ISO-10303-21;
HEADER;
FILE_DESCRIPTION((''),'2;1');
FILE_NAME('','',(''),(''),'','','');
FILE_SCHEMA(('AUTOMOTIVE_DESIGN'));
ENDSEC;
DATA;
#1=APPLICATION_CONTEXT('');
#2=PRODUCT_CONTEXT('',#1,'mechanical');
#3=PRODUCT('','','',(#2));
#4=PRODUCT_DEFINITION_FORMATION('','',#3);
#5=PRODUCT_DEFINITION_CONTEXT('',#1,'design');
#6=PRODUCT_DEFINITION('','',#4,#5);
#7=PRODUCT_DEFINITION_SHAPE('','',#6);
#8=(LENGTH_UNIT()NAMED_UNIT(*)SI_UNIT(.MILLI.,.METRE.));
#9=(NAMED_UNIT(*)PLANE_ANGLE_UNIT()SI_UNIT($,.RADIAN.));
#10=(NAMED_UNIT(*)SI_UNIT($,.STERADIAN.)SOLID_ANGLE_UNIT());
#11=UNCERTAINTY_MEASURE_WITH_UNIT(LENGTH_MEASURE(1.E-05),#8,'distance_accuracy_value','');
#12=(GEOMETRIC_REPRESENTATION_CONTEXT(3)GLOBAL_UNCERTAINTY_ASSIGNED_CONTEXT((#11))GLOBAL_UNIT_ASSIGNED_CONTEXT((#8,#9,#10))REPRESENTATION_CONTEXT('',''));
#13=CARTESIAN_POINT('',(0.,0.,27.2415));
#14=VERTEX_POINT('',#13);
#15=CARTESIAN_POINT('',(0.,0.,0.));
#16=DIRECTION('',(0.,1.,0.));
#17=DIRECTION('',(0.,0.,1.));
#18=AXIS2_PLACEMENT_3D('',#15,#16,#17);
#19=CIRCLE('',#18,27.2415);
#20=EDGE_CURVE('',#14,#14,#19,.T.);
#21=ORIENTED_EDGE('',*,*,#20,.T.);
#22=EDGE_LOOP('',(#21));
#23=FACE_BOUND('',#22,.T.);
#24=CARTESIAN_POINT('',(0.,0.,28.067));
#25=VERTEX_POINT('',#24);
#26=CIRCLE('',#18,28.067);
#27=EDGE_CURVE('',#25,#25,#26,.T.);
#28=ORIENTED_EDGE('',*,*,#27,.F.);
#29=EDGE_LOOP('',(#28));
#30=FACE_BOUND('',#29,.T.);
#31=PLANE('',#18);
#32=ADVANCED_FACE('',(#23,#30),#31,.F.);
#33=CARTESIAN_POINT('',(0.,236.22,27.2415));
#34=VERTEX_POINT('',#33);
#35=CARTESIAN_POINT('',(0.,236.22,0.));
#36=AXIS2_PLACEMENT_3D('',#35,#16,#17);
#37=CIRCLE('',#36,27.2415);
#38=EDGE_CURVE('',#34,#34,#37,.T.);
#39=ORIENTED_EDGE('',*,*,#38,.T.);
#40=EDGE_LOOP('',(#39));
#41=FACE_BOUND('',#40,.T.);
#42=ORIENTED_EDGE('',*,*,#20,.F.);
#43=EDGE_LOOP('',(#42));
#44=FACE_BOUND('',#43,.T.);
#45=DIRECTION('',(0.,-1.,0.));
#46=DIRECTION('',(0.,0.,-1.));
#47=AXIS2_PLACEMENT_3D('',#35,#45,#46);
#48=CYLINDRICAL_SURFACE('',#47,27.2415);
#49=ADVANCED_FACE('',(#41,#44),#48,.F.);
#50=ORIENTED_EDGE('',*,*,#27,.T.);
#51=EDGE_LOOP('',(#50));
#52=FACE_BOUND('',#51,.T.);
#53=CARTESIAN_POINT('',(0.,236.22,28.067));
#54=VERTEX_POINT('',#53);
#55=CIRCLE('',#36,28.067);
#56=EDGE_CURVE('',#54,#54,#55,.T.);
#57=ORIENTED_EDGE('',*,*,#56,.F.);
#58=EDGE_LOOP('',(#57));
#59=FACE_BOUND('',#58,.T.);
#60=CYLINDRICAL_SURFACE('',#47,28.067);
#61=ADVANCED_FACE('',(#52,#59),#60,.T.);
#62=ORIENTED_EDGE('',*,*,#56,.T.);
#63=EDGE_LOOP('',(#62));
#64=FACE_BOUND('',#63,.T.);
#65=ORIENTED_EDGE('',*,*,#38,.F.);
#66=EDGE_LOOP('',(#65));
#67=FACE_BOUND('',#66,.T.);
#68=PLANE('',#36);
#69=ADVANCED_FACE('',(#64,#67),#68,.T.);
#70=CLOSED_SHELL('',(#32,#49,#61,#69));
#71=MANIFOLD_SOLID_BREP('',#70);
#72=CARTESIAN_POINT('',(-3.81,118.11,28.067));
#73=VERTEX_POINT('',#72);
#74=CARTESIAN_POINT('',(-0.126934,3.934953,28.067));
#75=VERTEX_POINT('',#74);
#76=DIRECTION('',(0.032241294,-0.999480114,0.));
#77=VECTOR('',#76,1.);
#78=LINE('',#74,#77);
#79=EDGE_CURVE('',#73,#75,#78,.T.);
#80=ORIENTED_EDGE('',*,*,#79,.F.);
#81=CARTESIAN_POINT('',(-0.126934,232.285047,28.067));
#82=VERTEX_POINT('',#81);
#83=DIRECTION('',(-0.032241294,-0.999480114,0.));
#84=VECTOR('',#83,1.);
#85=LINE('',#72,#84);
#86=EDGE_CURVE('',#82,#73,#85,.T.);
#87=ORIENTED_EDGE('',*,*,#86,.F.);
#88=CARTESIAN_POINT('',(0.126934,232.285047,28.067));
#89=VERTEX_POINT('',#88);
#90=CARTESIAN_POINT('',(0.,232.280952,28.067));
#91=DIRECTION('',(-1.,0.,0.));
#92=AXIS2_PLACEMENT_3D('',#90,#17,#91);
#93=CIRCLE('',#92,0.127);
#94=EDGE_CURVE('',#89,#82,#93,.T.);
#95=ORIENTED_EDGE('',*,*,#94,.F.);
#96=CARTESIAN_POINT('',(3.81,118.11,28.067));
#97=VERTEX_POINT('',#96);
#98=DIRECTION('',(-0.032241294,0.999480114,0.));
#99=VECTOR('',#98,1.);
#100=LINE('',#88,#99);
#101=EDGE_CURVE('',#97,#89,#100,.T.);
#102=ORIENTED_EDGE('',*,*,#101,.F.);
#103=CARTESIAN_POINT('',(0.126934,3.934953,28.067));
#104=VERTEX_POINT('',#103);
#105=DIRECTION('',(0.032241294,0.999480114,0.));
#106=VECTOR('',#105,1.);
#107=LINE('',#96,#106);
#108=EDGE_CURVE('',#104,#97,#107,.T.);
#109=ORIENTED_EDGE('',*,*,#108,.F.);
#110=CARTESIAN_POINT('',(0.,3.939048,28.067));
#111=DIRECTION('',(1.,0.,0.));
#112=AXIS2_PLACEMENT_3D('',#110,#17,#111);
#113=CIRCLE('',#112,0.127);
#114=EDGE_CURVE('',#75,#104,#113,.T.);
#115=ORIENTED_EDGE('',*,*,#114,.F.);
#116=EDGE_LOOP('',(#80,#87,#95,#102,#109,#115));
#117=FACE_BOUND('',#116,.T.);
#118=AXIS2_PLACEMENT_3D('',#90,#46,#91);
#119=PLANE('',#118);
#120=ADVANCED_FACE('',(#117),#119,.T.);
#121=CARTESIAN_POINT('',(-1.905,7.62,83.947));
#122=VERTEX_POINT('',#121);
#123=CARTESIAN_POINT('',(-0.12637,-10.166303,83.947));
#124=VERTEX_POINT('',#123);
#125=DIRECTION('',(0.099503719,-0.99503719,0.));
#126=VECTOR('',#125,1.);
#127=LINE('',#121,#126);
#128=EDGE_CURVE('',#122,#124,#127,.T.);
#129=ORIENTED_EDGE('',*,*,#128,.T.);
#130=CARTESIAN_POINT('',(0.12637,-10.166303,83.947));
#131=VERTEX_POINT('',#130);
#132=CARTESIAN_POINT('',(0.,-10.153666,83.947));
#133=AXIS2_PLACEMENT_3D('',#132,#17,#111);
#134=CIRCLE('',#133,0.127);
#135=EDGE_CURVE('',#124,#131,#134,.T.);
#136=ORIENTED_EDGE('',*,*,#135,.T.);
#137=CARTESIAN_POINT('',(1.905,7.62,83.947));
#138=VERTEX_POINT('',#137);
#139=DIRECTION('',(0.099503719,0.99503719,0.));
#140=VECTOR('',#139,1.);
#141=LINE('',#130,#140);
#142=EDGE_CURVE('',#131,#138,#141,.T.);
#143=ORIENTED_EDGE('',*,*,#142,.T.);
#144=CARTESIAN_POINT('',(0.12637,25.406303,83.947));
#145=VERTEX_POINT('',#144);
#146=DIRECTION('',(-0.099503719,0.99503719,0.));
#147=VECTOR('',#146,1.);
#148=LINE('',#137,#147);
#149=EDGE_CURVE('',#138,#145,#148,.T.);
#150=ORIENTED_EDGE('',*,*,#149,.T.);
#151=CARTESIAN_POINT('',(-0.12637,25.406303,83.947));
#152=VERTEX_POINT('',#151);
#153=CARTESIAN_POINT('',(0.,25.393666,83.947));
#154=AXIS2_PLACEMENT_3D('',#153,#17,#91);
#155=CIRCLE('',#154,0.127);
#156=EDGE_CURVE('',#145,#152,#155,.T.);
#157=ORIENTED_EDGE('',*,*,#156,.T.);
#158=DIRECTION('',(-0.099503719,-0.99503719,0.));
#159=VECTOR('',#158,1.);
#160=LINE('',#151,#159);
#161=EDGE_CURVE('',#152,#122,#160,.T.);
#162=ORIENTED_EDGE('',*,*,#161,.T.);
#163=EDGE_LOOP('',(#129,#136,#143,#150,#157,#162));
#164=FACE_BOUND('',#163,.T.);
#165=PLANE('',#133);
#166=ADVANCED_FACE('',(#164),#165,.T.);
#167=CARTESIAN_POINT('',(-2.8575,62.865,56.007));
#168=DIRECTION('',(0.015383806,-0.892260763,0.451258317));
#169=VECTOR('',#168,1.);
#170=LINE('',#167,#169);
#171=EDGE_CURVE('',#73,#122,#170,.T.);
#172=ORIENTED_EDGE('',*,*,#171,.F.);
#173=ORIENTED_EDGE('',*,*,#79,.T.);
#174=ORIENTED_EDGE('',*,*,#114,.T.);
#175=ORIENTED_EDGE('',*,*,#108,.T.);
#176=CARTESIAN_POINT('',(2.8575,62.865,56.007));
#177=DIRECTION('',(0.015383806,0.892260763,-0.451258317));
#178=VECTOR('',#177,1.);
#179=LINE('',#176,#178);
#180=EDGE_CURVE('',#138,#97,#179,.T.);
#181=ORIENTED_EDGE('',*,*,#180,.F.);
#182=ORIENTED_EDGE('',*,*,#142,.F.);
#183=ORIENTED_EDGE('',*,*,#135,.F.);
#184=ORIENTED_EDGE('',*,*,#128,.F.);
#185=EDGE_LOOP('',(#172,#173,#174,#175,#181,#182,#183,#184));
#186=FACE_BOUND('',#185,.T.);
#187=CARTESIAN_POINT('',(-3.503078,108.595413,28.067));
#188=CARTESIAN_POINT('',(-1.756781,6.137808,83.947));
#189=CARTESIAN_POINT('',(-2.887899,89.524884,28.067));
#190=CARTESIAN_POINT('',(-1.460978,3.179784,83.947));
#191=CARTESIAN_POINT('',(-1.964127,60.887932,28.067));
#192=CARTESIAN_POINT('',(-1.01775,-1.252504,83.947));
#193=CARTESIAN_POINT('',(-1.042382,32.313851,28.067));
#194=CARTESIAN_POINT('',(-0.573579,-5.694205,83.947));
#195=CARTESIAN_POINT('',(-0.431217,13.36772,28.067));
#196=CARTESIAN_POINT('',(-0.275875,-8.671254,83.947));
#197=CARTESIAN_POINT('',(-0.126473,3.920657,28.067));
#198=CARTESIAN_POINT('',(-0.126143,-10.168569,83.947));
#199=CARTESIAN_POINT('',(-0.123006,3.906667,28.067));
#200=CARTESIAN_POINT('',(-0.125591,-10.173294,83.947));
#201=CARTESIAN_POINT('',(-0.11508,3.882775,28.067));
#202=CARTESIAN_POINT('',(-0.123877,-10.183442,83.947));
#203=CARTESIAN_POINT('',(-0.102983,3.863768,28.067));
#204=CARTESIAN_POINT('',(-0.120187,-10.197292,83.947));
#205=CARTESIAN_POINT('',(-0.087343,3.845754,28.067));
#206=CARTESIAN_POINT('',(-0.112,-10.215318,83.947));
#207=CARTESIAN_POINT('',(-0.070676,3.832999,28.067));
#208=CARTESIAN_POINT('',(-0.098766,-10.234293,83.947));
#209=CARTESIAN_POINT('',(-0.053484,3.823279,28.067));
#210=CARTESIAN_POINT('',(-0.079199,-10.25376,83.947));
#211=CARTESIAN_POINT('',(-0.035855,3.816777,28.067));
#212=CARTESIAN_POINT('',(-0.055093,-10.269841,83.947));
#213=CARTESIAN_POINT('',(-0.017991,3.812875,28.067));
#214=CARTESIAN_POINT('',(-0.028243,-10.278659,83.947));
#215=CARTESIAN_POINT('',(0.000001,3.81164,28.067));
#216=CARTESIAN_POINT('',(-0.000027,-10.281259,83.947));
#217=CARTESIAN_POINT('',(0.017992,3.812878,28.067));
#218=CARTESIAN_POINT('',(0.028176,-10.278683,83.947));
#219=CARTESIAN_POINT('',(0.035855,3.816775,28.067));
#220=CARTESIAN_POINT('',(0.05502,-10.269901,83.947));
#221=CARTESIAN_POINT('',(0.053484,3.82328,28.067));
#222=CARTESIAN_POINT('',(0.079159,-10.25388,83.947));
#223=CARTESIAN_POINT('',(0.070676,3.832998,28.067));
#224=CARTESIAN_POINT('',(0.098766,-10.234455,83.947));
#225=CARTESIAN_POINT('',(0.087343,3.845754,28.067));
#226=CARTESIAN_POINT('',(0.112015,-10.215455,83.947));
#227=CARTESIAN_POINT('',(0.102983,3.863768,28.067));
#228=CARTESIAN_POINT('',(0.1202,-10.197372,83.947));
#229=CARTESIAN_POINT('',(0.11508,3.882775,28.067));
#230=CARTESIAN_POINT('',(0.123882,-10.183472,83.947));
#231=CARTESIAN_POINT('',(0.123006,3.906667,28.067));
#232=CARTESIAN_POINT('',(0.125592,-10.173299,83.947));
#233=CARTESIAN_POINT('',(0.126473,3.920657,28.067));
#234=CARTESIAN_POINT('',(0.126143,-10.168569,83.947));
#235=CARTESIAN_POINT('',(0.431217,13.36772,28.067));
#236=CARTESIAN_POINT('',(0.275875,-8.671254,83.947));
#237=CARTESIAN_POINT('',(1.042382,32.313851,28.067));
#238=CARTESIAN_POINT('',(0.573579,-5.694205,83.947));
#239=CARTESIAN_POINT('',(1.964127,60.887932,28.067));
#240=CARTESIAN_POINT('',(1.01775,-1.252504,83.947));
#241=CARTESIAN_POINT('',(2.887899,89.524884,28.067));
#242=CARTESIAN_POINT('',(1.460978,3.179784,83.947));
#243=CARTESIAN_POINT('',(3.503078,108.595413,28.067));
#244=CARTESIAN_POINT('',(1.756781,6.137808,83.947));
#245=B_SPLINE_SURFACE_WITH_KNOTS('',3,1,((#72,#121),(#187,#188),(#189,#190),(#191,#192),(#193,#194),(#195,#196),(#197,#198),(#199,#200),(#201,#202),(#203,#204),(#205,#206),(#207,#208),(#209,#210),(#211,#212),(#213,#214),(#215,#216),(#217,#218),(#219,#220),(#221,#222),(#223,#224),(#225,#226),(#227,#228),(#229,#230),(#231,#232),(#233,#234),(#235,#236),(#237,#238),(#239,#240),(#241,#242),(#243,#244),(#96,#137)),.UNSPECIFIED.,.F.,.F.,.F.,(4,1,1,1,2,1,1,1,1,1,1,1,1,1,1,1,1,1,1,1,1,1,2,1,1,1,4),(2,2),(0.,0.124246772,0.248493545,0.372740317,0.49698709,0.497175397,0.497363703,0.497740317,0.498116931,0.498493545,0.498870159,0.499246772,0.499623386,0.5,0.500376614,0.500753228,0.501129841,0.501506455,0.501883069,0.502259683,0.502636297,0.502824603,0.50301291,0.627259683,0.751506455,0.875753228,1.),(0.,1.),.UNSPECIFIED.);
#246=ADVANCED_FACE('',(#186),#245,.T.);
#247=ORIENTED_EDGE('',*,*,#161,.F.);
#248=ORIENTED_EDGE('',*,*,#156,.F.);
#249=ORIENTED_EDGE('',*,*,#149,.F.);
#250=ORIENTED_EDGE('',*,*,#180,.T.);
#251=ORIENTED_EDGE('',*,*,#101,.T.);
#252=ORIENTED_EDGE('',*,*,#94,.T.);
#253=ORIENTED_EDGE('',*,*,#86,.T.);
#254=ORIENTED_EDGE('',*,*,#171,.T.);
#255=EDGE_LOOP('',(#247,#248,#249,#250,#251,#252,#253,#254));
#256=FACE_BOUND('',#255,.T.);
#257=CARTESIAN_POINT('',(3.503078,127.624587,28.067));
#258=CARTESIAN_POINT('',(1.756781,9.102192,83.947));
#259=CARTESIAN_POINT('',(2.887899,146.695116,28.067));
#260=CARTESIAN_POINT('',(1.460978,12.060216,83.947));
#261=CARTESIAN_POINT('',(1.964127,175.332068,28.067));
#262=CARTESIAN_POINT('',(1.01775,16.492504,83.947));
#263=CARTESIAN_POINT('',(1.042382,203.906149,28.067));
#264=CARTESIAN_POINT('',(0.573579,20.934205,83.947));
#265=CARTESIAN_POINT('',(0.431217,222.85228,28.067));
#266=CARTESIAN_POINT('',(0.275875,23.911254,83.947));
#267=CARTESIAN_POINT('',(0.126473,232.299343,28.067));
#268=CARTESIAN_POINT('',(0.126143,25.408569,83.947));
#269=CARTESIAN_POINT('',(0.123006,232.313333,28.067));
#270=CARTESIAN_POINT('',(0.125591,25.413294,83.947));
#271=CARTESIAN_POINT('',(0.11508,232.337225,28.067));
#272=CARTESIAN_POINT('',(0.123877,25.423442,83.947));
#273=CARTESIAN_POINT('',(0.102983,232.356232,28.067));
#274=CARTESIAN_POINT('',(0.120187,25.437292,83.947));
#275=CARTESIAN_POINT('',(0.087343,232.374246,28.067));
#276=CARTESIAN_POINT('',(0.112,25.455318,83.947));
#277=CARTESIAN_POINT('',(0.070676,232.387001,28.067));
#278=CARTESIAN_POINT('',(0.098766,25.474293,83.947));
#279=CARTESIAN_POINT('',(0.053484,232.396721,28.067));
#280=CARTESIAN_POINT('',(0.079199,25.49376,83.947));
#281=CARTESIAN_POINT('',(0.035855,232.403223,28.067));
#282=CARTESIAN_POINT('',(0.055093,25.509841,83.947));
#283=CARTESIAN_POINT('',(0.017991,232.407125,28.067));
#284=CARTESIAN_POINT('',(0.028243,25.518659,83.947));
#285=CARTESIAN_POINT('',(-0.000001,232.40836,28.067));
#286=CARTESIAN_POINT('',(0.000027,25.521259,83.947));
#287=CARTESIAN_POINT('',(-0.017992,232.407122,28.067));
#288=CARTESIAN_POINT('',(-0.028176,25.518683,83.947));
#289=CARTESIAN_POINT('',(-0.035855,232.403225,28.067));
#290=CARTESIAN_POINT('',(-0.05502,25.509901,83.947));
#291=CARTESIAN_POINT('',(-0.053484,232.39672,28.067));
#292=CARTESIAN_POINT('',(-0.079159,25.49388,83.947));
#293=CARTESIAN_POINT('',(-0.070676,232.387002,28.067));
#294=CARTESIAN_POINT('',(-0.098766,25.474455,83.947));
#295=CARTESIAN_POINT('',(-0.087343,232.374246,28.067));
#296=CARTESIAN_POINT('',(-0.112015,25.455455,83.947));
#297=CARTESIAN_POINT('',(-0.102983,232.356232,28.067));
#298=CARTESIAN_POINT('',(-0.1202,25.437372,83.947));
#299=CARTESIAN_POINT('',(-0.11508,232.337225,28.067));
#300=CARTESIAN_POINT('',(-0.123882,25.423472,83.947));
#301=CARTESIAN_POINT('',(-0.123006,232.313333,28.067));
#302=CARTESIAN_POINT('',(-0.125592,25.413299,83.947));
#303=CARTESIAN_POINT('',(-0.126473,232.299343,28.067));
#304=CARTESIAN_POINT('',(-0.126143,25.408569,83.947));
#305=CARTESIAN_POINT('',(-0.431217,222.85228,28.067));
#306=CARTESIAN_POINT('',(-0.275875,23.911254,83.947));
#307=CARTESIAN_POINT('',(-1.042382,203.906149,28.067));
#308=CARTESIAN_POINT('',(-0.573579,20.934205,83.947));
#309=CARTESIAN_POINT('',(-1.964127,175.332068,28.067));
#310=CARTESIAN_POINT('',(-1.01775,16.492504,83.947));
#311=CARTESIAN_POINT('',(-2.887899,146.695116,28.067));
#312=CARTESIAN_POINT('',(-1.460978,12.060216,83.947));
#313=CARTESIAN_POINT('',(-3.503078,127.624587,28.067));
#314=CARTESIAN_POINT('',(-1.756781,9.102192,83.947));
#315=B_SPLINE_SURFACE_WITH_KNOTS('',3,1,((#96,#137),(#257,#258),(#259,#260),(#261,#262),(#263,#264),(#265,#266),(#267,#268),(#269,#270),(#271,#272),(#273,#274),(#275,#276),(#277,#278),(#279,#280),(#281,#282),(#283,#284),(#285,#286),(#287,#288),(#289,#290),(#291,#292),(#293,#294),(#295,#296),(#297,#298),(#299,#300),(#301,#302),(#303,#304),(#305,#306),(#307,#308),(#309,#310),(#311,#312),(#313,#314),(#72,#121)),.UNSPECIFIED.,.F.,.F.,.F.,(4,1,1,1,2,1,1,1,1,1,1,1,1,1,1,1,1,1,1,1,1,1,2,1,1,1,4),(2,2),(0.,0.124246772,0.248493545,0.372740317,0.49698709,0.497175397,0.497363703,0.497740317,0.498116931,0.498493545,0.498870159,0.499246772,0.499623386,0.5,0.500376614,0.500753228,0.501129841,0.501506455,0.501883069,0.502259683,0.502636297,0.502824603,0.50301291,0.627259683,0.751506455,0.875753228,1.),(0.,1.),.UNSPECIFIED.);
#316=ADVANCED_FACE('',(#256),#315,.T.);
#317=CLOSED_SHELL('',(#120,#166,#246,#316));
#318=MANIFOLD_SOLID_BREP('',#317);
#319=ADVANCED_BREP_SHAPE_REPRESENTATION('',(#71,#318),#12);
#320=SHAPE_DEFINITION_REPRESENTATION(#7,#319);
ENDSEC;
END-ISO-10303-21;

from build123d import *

# Parameters (mm, degrees)
SKETCH1_R           = 28.067
SKETCH1_R_2         = 27.2415
BOSS_EXTRUDE1_DEPTH = 236.22


with BuildPart() as part:
    # Sketch1 → Boss-Extrude1 (new body)
    with BuildSketch(Plane(origin=(0, 0, 0), x_dir=(1, 0, 0), z_dir=(0, 1, 0))):
        with Locations(Location((0, 0, 0), (0, 0, 270))):
            Circle(SKETCH1_R)
        with Locations(Location((0, 0, 0), (0, 0, 270))):
            Circle(SKETCH1_R_2, mode=Mode.SUBTRACT)
    extrude(amount=BOSS_EXTRUDE1_DEPTH)


with BuildPart() as body_2:
    # Loft1: read off the stored shape, not the designer's step
    # Loft1: loft between two sections, ruled curve by curve
    loft1_from = [
        Edge.make_bspline([(3.81, 118.11, 28.067), (3.503077831, 127.624587232, 28.067), (2.887899486, 146.695115948, 28.067), (1.964126834, 175.332068151, 28.067), (1.04238228, 203.906149329, 28.067), (0.431216774, 222.852280019, 28.067), (0.126472807, 232.299342976, 28.067), (0.123006002, 232.313332636, 28.067), (0.115080241, 232.337224944, 28.067), (0.10298293, 232.35623166, 28.067), (0.087343073, 232.37424612, 28.067), (0.070675742, 232.387000998, 28.067), (0.053484065, 232.396721358, 28.067), (0.035854911, 232.403222586, 28.067), (0.017991342, 232.407124879, 28.067), (-6.82e-07, 232.408360384, 28.067), (-0.017991629, 232.407121833, 28.067), (-0.035855076, 232.403224607, 28.067), (-0.053483943, 232.396720213, 28.067), (-0.070675818, 232.387001668, 28.067), (-0.087343032, 232.374245764, 28.067), (-0.102982953, 232.356231861, 28.067), (-0.11508023, 232.337224851, 28.067), (-0.123006006, 232.313332673, 28.067), (-0.126472807, 232.299342976, 28.067), (-0.431216774, 222.852280019, 28.067), (-1.04238228, 203.906149329, 28.067), (-1.964126834, 175.332068151, 28.067), (-2.887899486, 146.695115948, 28.067), (-3.503077831, 127.624587232, 28.067), (-3.81, 118.11, 28.067)], [0, 0, 0, 0, 0.124246772, 0.248493545, 0.372740317, 0.49698709, 0.49698709, 0.497175397, 0.497363703, 0.497740317, 0.498116931, 0.498493545, 0.498870159, 0.499246772, 0.499623386, 0.5, 0.500376614, 0.500753228, 0.501129841, 0.501506455, 0.501883069, 0.502259683, 0.502636297, 0.502824603, 0.50301291, 0.50301291, 0.627259683, 0.751506455, 0.875753228, 1, 1, 1, 1], 3),
        Edge.make_bspline([(-3.81, 118.11, 28.067), (-3.503077831, 108.595412768, 28.067), (-2.887899486, 89.524884052, 28.067), (-1.964126834, 60.887931849, 28.067), (-1.04238228, 32.313850671, 28.067), (-0.431216774, 13.367719981, 28.067), (-0.126472807, 3.920657024, 28.067), (-0.123006002, 3.906667364, 28.067), (-0.115080241, 3.882775056, 28.067), (-0.10298293, 3.86376834, 28.067), (-0.087343073, 3.84575388, 28.067), (-0.070675742, 3.832999002, 28.067), (-0.053484065, 3.823278642, 28.067), (-0.035854911, 3.816777414, 28.067), (-0.017991342, 3.812875121, 28.067), (6.82e-07, 3.811639616, 28.067), (0.017991629, 3.812878167, 28.067), (0.035855076, 3.816775393, 28.067), (0.053483943, 3.823279787, 28.067), (0.070675818, 3.832998332, 28.067), (0.087343032, 3.845754236, 28.067), (0.102982953, 3.863768139, 28.067), (0.11508023, 3.882775149, 28.067), (0.123006006, 3.906667327, 28.067), (0.126472807, 3.920657024, 28.067), (0.431216774, 13.367719981, 28.067), (1.04238228, 32.313850671, 28.067), (1.964126834, 60.887931849, 28.067), (2.887899486, 89.524884052, 28.067), (3.503077831, 108.595412768, 28.067), (3.81, 118.11, 28.067)], [0, 0, 0, 0, 0.124246772, 0.248493545, 0.372740317, 0.49698709, 0.49698709, 0.497175397, 0.497363703, 0.497740317, 0.498116931, 0.498493545, 0.498870159, 0.499246772, 0.499623386, 0.5, 0.500376614, 0.500753228, 0.501129841, 0.501506455, 0.501883069, 0.502259683, 0.502636297, 0.502824603, 0.50301291, 0.50301291, 0.627259683, 0.751506455, 0.875753228, 1, 1, 1, 1], 3),
    ]
    loft1_to = [
        Edge.make_bspline([(1.905, 7.62, 83.947), (1.75678081, 9.102191897, 83.947), (1.460978397, 12.060216035, 83.947), (1.017749634, 16.492503656, 83.947), (0.573579452, 20.934205479, 83.947), (0.275874643, 23.911253566, 83.947), (0.126143135, 25.408568647, 83.947), (0.125591007, 25.413293851, 83.947), (0.123876537, 25.423441801, 83.947), (0.120187299, 25.437291664, 83.947), (0.111999967, 25.455317895, 83.947), (0.098765983, 25.474293033, 83.947), (0.079198941, 25.493759592, 83.947), (0.055093099, 25.509840608, 83.947), (0.028242712, 25.518659119, 83.947), (2.6716e-05, 25.5212587, 83.947), (-0.028175953, 25.518682929, 83.947), (-0.055019681, 25.509900581, 83.947), (-0.079158853, 25.493880432, 83.947), (-0.098766267, 25.47445465, 83.947), (-0.112014717, 25.455455404, 83.947), (-0.120200134, 25.43737158, 83.947), (-0.123882064, 25.423471986, 83.947), (-0.125592023, 25.413298911, 83.947), (-0.126143135, 25.408568647, 83.947), (-0.275874643, 23.911253566, 83.947), (-0.573579452, 20.934205479, 83.947), (-1.017749634, 16.492503656, 83.947), (-1.460978397, 12.060216035, 83.947), (-1.75678081, 9.102191897, 83.947), (-1.905, 7.62, 83.947)], [0, 0, 0, 0, 0.124246772, 0.248493545, 0.372740317, 0.49698709, 0.49698709, 0.497175397, 0.497363703, 0.497740317, 0.498116931, 0.498493545, 0.498870159, 0.499246772, 0.499623386, 0.5, 0.500376614, 0.500753228, 0.501129841, 0.501506455, 0.501883069, 0.502259683, 0.502636297, 0.502824603, 0.50301291, 0.50301291, 0.627259683, 0.751506455, 0.875753228, 1, 1, 1, 1], 3),
        Edge.make_bspline([(-1.905, 7.62, 83.947), (-1.75678081, 6.137808103, 83.947), (-1.460978397, 3.179783965, 83.947), (-1.017749634, -1.252503656, 83.947), (-0.573579452, -5.694205479, 83.947), (-0.275874643, -8.671253566, 83.947), (-0.126143135, -10.168568647, 83.947), (-0.125591007, -10.173293851, 83.947), (-0.123876537, -10.183441801, 83.947), (-0.120187299, -10.197291664, 83.947), (-0.111999967, -10.215317895, 83.947), (-0.098765983, -10.234293033, 83.947), (-0.079198941, -10.253759592, 83.947), (-0.055093099, -10.269840608, 83.947), (-0.028242712, -10.278659119, 83.947), (-2.6716e-05, -10.2812587, 83.947), (0.028175953, -10.278682929, 83.947), (0.055019681, -10.269900581, 83.947), (0.079158853, -10.253880432, 83.947), (0.098766267, -10.23445465, 83.947), (0.112014717, -10.215455404, 83.947), (0.120200134, -10.19737158, 83.947), (0.123882064, -10.183471986, 83.947), (0.125592023, -10.173298911, 83.947), (0.126143135, -10.168568647, 83.947), (0.275874643, -8.671253566, 83.947), (0.573579452, -5.694205479, 83.947), (1.017749634, -1.252503656, 83.947), (1.460978397, 3.179783965, 83.947), (1.75678081, 6.137808103, 83.947), (1.905, 7.62, 83.947)], [0, 0, 0, 0, 0.124246772, 0.248493545, 0.372740317, 0.49698709, 0.49698709, 0.497175397, 0.497363703, 0.497740317, 0.498116931, 0.498493545, 0.498870159, 0.499246772, 0.499623386, 0.5, 0.500376614, 0.500753228, 0.501129841, 0.501506455, 0.501883069, 0.502259683, 0.502636297, 0.502824603, 0.50301291, 0.50301291, 0.627259683, 0.751506455, 0.875753228, 1, 1, 1, 1], 3),
    ]
    loft1 = Solid(Shell([*[Face.make_surface_from_curves(loft1_from[k], loft1_to[k]) for k in range(2)], Face(Wire(loft1_from)), Face(Wire(loft1_to))]))
    add(loft1)


solid = Compound([part.part, body_2.part])
